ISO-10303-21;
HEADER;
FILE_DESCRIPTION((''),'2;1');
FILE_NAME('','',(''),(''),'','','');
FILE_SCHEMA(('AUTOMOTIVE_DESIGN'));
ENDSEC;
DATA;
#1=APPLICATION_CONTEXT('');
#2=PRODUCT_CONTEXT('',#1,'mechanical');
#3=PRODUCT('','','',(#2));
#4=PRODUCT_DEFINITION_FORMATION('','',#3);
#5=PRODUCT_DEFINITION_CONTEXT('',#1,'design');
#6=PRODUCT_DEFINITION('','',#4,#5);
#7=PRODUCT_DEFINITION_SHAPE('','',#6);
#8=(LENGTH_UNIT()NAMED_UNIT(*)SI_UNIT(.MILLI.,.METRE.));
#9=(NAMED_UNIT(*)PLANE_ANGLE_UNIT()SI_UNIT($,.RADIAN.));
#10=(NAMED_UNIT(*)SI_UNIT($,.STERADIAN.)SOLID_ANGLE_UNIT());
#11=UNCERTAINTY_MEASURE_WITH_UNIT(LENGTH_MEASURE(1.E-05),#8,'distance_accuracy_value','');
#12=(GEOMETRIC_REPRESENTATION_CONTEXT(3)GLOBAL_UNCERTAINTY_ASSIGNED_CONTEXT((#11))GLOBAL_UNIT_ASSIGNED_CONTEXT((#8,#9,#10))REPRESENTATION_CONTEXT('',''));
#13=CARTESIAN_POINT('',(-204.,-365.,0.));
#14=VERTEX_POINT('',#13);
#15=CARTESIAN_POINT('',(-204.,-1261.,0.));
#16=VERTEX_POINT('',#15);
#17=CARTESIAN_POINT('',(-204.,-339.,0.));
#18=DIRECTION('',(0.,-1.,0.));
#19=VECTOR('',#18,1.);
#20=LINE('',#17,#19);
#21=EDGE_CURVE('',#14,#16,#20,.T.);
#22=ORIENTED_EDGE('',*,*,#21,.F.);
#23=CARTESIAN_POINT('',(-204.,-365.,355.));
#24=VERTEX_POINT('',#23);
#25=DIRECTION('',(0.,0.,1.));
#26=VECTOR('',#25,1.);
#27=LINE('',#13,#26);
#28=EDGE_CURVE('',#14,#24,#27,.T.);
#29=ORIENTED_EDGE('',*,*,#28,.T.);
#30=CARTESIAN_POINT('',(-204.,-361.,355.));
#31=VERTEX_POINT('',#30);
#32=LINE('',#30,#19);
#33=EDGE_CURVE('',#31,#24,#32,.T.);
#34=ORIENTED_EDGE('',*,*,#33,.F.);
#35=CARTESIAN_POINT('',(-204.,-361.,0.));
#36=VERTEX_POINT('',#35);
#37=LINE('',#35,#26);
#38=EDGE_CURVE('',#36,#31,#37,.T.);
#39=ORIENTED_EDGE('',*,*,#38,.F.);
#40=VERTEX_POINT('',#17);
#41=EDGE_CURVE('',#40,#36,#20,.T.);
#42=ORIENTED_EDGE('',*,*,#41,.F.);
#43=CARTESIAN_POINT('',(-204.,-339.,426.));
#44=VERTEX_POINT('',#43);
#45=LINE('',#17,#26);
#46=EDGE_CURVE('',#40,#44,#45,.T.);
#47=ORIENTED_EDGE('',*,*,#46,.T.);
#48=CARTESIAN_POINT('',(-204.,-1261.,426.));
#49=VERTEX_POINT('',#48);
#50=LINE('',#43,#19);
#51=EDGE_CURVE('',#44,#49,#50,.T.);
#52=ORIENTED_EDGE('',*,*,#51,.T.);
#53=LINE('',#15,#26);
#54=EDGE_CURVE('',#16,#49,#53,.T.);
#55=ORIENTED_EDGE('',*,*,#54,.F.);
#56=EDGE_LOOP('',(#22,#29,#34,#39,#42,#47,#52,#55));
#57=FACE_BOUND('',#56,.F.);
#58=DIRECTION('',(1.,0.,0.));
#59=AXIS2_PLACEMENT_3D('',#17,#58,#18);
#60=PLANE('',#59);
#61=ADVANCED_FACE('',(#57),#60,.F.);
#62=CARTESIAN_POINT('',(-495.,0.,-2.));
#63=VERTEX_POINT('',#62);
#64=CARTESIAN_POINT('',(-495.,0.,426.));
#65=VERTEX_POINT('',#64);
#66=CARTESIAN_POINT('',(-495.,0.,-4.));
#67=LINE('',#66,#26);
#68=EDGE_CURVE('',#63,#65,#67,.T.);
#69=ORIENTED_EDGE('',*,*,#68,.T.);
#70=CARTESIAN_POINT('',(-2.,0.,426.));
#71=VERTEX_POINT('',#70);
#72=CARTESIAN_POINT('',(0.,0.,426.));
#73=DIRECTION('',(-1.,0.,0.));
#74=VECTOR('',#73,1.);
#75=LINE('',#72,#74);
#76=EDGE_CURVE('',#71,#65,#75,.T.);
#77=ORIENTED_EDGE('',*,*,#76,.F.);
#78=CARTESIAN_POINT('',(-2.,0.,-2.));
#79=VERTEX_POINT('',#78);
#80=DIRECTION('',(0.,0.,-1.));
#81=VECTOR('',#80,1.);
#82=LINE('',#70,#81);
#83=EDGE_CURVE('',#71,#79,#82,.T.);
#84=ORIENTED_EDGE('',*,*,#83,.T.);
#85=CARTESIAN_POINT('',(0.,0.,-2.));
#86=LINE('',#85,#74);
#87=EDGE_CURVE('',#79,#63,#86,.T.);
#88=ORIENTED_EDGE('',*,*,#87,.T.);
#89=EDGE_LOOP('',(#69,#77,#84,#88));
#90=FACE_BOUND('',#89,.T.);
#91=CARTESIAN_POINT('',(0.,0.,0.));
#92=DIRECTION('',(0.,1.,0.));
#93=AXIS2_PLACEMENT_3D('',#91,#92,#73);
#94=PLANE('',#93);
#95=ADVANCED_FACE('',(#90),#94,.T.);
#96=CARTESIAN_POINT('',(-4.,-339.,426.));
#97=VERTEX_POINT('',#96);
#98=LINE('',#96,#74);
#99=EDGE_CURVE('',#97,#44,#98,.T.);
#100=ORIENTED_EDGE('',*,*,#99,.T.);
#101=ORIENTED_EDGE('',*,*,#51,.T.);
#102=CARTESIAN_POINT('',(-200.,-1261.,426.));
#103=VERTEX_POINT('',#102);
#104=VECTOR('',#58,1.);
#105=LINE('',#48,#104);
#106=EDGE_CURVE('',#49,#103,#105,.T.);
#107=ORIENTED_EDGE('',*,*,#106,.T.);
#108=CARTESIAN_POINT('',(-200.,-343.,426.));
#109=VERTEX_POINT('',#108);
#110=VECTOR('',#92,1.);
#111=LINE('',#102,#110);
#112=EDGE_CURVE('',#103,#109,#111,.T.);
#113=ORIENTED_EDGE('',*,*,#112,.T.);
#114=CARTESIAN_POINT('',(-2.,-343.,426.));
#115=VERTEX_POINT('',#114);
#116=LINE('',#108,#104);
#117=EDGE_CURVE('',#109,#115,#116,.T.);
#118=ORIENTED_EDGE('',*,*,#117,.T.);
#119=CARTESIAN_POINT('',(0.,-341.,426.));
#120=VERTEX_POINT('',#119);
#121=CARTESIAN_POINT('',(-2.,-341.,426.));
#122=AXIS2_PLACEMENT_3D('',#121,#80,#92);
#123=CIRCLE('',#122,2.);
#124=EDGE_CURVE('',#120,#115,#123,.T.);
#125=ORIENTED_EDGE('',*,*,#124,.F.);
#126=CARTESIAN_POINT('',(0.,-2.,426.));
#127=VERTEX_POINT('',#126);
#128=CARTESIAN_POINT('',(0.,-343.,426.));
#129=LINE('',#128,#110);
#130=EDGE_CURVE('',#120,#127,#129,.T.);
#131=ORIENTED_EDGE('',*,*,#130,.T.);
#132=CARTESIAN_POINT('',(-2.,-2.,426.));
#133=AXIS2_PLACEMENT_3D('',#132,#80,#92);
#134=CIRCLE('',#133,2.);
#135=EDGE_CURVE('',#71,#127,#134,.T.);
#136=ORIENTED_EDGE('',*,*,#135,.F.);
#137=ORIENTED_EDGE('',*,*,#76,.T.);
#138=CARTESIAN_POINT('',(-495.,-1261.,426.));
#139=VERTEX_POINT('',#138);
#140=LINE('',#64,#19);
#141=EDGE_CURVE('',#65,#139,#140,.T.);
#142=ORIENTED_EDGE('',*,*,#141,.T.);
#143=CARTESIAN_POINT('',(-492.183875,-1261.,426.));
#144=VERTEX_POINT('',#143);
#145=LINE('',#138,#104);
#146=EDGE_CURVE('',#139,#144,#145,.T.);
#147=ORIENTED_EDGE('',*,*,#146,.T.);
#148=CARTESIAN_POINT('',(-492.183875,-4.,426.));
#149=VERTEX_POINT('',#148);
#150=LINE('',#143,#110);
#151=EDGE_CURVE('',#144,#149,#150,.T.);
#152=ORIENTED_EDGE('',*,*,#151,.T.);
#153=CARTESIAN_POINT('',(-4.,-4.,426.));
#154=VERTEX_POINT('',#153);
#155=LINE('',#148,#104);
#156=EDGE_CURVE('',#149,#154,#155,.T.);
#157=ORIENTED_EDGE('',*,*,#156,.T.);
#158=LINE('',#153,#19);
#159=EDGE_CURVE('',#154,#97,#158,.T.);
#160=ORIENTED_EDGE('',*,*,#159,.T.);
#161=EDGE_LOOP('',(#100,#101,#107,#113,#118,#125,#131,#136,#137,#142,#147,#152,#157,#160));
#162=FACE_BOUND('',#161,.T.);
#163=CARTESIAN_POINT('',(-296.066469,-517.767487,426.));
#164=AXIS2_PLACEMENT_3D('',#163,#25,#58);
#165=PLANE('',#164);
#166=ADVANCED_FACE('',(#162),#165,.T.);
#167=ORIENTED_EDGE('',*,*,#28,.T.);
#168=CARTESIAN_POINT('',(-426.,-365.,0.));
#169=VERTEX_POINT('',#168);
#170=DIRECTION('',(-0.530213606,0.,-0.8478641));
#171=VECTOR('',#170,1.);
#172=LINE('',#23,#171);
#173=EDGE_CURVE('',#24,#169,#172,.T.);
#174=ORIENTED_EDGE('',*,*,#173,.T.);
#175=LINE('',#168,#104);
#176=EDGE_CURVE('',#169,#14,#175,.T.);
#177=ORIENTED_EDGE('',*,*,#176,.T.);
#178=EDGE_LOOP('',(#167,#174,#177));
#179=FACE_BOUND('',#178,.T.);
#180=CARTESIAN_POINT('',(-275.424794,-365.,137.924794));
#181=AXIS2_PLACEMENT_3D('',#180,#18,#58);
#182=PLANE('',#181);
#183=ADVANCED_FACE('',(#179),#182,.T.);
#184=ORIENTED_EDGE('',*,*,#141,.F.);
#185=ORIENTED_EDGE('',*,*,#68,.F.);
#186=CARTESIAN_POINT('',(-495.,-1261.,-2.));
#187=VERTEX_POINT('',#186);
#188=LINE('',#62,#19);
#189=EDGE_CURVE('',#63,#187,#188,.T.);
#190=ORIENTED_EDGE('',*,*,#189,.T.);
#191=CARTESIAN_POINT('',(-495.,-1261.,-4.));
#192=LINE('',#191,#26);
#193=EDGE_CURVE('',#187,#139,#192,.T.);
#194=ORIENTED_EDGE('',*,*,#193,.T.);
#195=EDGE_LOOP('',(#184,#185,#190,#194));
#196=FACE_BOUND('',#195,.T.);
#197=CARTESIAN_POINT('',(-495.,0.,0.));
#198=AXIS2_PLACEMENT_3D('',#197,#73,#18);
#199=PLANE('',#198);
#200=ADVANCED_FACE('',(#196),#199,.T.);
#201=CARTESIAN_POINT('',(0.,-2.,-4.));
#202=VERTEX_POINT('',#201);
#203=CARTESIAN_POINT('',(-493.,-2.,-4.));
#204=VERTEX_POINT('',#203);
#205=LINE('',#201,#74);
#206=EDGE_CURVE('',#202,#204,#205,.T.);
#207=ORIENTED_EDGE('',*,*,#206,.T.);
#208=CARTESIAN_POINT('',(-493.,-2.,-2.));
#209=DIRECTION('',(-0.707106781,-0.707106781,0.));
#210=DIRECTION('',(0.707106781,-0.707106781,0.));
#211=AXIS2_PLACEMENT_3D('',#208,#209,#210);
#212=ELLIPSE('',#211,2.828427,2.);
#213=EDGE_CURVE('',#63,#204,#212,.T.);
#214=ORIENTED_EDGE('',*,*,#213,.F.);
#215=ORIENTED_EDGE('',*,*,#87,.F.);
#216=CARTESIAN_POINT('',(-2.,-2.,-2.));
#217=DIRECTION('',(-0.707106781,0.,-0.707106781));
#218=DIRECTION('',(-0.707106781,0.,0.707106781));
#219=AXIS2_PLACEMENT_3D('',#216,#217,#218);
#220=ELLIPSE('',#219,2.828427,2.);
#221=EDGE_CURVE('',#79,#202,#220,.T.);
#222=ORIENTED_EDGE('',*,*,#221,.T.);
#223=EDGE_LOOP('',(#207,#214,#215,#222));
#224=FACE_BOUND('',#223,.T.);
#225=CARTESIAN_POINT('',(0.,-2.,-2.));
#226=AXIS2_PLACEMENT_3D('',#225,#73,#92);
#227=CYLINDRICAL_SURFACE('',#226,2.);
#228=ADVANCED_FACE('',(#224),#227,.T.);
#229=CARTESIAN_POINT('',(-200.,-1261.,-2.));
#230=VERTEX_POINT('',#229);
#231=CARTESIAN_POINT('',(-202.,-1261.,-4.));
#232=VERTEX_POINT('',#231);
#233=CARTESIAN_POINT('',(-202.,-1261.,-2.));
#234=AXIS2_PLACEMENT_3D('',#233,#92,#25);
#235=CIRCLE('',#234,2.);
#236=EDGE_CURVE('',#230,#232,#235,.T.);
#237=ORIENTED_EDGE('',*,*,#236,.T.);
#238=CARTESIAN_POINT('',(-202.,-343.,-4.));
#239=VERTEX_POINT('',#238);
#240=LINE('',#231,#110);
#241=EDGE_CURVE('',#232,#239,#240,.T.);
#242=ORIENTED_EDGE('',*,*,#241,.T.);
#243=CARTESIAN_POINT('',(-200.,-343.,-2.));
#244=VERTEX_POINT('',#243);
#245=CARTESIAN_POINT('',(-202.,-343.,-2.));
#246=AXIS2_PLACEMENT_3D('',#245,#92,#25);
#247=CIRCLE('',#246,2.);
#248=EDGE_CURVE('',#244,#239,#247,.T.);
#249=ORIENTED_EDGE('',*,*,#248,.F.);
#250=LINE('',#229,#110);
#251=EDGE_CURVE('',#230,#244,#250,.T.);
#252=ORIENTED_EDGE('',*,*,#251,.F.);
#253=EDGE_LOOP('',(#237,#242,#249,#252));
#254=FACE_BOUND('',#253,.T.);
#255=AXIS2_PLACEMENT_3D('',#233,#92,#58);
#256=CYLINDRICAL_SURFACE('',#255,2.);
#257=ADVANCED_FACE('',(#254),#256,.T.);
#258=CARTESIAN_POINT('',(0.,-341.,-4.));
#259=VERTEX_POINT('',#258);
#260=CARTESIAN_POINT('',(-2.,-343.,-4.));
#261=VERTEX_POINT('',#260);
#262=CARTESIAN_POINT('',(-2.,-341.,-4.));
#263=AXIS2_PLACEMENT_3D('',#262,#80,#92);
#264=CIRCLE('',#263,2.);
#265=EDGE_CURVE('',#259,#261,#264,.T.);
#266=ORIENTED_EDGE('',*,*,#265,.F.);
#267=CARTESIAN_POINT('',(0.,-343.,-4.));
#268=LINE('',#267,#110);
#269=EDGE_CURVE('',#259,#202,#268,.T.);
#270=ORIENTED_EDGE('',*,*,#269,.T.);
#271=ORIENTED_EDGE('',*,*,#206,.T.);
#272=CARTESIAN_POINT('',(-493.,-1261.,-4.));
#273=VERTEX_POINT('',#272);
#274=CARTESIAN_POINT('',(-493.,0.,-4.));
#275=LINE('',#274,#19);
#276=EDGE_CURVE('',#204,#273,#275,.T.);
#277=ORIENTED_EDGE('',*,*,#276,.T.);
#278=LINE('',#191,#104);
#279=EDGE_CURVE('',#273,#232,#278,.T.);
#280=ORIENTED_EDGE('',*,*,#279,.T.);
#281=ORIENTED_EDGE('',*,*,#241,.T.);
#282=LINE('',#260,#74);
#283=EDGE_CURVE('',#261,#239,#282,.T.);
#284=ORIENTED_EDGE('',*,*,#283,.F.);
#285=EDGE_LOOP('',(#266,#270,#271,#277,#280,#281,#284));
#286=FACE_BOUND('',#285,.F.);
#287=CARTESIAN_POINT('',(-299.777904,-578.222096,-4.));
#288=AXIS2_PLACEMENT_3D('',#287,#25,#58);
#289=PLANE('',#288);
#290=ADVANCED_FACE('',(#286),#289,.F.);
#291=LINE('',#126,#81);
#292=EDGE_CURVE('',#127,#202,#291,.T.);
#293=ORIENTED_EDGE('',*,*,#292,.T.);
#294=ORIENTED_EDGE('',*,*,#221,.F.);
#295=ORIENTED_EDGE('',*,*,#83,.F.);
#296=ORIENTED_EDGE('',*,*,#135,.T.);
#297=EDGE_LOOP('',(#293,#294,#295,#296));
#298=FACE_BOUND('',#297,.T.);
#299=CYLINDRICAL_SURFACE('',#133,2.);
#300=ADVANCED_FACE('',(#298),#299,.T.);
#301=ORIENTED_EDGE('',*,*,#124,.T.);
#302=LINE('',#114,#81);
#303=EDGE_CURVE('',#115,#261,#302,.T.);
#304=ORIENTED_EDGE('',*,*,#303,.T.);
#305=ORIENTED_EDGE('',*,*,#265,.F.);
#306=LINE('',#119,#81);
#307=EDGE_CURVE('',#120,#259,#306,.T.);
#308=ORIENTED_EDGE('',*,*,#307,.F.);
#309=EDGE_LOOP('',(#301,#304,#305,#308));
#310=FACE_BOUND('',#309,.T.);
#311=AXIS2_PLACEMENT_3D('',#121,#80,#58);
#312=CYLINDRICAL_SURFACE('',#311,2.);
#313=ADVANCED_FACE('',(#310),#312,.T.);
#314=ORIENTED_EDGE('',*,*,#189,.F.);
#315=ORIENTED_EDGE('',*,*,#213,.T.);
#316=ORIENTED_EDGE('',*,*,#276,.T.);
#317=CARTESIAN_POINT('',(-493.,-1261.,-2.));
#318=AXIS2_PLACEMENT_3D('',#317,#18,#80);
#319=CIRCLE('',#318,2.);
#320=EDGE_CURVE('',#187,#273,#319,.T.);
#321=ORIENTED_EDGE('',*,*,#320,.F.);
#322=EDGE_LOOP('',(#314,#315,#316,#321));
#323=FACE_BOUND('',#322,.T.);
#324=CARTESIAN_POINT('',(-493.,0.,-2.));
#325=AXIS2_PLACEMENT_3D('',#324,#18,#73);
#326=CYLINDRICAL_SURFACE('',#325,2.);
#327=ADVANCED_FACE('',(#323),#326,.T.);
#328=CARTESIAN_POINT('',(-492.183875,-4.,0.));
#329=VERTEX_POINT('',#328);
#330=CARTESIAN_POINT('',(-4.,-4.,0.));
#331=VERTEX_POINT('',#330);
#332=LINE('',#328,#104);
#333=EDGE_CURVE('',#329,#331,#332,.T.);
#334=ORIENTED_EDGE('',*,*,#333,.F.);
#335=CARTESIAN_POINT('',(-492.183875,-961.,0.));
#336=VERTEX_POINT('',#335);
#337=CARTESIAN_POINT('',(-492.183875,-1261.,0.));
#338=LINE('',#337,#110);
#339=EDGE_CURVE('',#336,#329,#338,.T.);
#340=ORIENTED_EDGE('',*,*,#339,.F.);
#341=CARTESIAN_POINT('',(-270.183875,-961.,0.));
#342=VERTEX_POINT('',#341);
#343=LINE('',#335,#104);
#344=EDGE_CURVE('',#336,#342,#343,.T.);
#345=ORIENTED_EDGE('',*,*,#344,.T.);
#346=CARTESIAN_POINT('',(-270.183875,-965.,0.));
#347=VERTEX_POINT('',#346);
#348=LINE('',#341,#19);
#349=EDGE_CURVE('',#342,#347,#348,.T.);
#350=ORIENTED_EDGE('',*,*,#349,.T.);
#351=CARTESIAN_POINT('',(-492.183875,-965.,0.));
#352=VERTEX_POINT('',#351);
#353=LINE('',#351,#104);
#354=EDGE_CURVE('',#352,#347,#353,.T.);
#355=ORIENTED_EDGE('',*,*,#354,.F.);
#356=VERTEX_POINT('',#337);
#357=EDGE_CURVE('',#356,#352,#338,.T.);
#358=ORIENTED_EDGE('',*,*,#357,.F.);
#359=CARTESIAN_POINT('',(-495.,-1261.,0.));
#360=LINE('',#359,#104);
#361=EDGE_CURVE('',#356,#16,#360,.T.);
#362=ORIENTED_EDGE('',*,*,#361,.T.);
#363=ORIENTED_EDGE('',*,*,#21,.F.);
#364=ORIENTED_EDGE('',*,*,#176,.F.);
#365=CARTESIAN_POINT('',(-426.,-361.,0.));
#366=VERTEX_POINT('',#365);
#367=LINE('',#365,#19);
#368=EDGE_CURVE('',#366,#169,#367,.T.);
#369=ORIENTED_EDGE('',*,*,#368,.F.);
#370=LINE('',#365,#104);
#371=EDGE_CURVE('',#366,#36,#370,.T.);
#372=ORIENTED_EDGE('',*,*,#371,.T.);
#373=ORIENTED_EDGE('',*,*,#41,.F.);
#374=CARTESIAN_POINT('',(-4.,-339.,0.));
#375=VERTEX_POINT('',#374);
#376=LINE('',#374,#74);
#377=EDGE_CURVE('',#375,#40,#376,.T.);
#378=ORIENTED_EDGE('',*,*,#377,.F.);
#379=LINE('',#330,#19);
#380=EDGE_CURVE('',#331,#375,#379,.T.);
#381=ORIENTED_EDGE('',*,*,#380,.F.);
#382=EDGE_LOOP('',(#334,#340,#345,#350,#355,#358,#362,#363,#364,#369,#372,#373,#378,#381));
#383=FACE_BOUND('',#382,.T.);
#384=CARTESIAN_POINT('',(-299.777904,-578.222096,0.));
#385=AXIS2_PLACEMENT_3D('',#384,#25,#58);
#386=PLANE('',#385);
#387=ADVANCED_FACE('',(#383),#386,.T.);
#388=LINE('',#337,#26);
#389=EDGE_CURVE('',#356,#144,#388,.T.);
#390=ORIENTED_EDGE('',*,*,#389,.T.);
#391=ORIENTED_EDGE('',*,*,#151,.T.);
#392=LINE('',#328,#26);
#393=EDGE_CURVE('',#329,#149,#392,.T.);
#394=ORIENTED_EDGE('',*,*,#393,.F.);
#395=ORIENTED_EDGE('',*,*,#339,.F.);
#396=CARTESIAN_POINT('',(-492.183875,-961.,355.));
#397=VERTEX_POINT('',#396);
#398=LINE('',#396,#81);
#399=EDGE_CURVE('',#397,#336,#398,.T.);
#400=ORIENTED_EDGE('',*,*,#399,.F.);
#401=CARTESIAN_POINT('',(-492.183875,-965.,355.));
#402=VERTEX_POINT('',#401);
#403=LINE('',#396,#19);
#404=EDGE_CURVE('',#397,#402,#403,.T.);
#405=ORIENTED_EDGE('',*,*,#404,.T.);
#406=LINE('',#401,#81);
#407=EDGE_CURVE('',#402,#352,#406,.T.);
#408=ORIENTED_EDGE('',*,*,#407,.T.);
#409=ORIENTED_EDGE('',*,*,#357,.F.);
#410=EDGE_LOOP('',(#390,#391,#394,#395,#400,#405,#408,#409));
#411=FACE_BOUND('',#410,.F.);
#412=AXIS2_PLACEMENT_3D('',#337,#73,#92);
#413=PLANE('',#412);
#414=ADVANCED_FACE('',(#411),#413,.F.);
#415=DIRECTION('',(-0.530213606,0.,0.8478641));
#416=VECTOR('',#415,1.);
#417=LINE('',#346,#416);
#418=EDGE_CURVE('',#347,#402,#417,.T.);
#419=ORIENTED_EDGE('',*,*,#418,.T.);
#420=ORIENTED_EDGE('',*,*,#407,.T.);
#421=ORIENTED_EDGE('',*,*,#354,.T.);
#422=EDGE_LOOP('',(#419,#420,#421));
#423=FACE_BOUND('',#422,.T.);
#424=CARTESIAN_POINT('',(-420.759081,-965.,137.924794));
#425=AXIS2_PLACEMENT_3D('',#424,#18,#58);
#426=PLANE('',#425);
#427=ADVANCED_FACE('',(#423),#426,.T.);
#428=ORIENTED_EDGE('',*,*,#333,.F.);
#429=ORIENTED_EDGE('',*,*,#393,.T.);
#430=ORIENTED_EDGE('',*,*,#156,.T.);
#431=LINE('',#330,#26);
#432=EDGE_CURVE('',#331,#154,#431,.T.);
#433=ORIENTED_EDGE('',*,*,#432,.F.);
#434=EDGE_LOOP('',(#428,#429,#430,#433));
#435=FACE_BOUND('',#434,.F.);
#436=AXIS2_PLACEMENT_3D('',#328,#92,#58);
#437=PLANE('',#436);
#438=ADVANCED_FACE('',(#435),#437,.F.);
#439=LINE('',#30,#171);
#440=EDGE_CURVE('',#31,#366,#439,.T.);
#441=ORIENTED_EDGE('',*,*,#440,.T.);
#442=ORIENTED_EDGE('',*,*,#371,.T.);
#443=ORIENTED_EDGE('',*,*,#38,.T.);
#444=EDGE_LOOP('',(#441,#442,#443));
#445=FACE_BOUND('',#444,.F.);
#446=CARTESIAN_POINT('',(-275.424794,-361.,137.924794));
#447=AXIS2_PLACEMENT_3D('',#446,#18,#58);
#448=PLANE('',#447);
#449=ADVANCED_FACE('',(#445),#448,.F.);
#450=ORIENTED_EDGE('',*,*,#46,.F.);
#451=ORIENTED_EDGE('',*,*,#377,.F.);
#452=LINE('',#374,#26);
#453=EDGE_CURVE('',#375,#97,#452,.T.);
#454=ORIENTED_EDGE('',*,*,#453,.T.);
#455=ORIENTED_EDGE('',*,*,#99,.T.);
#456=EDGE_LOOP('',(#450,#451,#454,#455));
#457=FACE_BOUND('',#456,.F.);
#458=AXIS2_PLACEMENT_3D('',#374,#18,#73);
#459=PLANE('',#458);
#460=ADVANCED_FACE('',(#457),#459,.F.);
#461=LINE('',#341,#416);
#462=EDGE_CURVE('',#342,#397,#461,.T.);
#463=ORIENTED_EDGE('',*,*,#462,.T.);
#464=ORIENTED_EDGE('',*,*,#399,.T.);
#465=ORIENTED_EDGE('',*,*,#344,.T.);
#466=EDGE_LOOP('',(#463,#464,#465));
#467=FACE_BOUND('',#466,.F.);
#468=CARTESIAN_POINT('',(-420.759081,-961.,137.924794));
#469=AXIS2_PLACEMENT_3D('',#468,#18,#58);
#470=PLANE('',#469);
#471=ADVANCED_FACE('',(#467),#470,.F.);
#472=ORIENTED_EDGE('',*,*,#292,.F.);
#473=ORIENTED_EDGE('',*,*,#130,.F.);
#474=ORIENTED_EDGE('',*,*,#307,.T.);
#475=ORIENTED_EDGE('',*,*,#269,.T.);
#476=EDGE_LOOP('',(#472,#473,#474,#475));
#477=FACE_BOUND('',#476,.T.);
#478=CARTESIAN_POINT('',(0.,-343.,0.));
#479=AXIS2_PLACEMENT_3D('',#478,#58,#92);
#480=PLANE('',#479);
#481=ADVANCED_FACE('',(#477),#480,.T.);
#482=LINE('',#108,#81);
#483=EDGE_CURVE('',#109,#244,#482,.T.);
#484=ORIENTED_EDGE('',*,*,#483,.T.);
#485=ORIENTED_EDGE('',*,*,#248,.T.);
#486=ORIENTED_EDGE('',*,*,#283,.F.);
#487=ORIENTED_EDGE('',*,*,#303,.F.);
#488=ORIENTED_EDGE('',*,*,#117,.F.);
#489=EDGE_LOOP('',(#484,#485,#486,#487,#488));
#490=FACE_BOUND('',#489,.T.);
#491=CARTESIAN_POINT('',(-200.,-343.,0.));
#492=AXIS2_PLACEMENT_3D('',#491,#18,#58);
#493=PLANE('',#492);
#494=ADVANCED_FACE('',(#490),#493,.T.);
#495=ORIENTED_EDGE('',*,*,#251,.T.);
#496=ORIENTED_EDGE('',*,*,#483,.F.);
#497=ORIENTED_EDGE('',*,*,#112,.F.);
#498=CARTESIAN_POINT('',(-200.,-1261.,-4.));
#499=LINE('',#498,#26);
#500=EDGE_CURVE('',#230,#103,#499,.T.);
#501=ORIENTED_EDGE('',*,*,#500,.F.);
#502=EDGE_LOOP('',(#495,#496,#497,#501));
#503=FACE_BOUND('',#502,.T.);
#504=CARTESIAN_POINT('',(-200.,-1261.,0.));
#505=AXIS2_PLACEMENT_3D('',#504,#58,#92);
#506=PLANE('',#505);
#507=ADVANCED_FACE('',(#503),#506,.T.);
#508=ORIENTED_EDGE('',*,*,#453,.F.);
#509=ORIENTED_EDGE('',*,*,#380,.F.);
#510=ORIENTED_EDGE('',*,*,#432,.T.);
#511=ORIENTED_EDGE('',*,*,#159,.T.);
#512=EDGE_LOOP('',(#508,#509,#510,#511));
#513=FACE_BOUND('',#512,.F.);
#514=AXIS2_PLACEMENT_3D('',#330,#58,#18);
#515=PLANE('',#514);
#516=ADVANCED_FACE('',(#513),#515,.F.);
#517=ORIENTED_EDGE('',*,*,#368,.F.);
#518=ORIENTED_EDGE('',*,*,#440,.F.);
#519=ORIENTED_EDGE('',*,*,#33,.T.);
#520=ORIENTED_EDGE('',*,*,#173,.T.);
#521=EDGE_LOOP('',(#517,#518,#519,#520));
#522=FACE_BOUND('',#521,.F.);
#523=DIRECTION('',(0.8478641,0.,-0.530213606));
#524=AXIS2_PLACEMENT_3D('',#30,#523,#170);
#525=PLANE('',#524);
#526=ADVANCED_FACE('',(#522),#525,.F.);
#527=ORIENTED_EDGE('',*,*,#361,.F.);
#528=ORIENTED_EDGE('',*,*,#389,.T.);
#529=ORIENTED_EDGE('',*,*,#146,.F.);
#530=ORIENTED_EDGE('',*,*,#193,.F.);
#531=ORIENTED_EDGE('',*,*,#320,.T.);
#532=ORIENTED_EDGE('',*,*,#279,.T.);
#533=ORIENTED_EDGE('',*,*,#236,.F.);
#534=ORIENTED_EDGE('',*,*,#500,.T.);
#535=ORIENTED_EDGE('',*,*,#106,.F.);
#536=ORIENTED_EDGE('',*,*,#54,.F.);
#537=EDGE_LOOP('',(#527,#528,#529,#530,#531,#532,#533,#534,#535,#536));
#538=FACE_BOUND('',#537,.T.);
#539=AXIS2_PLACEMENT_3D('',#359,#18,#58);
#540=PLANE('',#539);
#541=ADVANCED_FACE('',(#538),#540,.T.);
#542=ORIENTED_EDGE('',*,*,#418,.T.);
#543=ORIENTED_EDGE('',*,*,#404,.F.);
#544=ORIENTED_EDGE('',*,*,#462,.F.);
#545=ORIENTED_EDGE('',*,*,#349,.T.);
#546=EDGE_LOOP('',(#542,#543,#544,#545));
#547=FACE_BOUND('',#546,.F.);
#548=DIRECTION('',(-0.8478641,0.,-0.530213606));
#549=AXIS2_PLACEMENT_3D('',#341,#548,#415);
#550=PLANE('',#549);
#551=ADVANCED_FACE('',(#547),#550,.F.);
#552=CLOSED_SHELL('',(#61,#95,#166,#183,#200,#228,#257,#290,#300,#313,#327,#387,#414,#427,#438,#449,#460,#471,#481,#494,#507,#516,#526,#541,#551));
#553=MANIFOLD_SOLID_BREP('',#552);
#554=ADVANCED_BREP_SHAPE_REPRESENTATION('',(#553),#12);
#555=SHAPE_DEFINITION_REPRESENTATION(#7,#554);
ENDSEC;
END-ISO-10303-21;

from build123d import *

# Parameters (mm, degrees)
F1_DEPTH  = 426
F3_DEPTH  = 4
F4_R      = 2
F7_DEPTH  = 4
F10_DEPTH = 4


# Not quite as in the source:
# - a feature names something its author has since deleted; it is built from what else it names


with BuildPart() as f1:
    # F0 (on Top) → F1 (new body)
    with BuildSketch(Plane.XY):
        Polygon((-200, -343), (0, -343), (0, 0), (-495, 0), (-495, -1261), (-492.1838745495, -1261), (-492.1838745495, -4), (-4, -4), (-4, -339), (-204, -339), (-204, -1261), (-200, -1261), align=None)
    extrude(amount=F1_DEPTH)

    # F2 (on Top) → F3 (join)
    with BuildSketch(Plane.XY):
        Polygon((0, 0), (-495, 0), (-495, -1261), (-200, -1261), (-200, -343), (0, -343), align=None)
    extrude(amount=-F3_DEPTH)

    # F4
    f4_edges = [f1.edges().sort_by_distance(p)[0] for p in [
        (-200, -802, -4),
        (-495, -630.5, -4),
        (-247.5, 0, -4),
        (0, -343, 211),
        (0, 0, 211),
    ]]
    fillet(f4_edges, radius=F4_R)

    # F6 (on offset) → F7 (join)
    with BuildSketch(Plane.XZ.offset(961)):
        Polygon((-492.1838745495, 355), (-492.1838745495, 0), (-270.1838745495, 0), align=None)
    extrude(amount=F7_DEPTH)

    # F9 (on offset) → F10 (join)
    with BuildSketch(Plane.XZ.offset(361)):
        Polygon((-204, 355), (-426, 0), (-204, 0), align=None)
    extrude(amount=F10_DEPTH)


solid = f1.part
